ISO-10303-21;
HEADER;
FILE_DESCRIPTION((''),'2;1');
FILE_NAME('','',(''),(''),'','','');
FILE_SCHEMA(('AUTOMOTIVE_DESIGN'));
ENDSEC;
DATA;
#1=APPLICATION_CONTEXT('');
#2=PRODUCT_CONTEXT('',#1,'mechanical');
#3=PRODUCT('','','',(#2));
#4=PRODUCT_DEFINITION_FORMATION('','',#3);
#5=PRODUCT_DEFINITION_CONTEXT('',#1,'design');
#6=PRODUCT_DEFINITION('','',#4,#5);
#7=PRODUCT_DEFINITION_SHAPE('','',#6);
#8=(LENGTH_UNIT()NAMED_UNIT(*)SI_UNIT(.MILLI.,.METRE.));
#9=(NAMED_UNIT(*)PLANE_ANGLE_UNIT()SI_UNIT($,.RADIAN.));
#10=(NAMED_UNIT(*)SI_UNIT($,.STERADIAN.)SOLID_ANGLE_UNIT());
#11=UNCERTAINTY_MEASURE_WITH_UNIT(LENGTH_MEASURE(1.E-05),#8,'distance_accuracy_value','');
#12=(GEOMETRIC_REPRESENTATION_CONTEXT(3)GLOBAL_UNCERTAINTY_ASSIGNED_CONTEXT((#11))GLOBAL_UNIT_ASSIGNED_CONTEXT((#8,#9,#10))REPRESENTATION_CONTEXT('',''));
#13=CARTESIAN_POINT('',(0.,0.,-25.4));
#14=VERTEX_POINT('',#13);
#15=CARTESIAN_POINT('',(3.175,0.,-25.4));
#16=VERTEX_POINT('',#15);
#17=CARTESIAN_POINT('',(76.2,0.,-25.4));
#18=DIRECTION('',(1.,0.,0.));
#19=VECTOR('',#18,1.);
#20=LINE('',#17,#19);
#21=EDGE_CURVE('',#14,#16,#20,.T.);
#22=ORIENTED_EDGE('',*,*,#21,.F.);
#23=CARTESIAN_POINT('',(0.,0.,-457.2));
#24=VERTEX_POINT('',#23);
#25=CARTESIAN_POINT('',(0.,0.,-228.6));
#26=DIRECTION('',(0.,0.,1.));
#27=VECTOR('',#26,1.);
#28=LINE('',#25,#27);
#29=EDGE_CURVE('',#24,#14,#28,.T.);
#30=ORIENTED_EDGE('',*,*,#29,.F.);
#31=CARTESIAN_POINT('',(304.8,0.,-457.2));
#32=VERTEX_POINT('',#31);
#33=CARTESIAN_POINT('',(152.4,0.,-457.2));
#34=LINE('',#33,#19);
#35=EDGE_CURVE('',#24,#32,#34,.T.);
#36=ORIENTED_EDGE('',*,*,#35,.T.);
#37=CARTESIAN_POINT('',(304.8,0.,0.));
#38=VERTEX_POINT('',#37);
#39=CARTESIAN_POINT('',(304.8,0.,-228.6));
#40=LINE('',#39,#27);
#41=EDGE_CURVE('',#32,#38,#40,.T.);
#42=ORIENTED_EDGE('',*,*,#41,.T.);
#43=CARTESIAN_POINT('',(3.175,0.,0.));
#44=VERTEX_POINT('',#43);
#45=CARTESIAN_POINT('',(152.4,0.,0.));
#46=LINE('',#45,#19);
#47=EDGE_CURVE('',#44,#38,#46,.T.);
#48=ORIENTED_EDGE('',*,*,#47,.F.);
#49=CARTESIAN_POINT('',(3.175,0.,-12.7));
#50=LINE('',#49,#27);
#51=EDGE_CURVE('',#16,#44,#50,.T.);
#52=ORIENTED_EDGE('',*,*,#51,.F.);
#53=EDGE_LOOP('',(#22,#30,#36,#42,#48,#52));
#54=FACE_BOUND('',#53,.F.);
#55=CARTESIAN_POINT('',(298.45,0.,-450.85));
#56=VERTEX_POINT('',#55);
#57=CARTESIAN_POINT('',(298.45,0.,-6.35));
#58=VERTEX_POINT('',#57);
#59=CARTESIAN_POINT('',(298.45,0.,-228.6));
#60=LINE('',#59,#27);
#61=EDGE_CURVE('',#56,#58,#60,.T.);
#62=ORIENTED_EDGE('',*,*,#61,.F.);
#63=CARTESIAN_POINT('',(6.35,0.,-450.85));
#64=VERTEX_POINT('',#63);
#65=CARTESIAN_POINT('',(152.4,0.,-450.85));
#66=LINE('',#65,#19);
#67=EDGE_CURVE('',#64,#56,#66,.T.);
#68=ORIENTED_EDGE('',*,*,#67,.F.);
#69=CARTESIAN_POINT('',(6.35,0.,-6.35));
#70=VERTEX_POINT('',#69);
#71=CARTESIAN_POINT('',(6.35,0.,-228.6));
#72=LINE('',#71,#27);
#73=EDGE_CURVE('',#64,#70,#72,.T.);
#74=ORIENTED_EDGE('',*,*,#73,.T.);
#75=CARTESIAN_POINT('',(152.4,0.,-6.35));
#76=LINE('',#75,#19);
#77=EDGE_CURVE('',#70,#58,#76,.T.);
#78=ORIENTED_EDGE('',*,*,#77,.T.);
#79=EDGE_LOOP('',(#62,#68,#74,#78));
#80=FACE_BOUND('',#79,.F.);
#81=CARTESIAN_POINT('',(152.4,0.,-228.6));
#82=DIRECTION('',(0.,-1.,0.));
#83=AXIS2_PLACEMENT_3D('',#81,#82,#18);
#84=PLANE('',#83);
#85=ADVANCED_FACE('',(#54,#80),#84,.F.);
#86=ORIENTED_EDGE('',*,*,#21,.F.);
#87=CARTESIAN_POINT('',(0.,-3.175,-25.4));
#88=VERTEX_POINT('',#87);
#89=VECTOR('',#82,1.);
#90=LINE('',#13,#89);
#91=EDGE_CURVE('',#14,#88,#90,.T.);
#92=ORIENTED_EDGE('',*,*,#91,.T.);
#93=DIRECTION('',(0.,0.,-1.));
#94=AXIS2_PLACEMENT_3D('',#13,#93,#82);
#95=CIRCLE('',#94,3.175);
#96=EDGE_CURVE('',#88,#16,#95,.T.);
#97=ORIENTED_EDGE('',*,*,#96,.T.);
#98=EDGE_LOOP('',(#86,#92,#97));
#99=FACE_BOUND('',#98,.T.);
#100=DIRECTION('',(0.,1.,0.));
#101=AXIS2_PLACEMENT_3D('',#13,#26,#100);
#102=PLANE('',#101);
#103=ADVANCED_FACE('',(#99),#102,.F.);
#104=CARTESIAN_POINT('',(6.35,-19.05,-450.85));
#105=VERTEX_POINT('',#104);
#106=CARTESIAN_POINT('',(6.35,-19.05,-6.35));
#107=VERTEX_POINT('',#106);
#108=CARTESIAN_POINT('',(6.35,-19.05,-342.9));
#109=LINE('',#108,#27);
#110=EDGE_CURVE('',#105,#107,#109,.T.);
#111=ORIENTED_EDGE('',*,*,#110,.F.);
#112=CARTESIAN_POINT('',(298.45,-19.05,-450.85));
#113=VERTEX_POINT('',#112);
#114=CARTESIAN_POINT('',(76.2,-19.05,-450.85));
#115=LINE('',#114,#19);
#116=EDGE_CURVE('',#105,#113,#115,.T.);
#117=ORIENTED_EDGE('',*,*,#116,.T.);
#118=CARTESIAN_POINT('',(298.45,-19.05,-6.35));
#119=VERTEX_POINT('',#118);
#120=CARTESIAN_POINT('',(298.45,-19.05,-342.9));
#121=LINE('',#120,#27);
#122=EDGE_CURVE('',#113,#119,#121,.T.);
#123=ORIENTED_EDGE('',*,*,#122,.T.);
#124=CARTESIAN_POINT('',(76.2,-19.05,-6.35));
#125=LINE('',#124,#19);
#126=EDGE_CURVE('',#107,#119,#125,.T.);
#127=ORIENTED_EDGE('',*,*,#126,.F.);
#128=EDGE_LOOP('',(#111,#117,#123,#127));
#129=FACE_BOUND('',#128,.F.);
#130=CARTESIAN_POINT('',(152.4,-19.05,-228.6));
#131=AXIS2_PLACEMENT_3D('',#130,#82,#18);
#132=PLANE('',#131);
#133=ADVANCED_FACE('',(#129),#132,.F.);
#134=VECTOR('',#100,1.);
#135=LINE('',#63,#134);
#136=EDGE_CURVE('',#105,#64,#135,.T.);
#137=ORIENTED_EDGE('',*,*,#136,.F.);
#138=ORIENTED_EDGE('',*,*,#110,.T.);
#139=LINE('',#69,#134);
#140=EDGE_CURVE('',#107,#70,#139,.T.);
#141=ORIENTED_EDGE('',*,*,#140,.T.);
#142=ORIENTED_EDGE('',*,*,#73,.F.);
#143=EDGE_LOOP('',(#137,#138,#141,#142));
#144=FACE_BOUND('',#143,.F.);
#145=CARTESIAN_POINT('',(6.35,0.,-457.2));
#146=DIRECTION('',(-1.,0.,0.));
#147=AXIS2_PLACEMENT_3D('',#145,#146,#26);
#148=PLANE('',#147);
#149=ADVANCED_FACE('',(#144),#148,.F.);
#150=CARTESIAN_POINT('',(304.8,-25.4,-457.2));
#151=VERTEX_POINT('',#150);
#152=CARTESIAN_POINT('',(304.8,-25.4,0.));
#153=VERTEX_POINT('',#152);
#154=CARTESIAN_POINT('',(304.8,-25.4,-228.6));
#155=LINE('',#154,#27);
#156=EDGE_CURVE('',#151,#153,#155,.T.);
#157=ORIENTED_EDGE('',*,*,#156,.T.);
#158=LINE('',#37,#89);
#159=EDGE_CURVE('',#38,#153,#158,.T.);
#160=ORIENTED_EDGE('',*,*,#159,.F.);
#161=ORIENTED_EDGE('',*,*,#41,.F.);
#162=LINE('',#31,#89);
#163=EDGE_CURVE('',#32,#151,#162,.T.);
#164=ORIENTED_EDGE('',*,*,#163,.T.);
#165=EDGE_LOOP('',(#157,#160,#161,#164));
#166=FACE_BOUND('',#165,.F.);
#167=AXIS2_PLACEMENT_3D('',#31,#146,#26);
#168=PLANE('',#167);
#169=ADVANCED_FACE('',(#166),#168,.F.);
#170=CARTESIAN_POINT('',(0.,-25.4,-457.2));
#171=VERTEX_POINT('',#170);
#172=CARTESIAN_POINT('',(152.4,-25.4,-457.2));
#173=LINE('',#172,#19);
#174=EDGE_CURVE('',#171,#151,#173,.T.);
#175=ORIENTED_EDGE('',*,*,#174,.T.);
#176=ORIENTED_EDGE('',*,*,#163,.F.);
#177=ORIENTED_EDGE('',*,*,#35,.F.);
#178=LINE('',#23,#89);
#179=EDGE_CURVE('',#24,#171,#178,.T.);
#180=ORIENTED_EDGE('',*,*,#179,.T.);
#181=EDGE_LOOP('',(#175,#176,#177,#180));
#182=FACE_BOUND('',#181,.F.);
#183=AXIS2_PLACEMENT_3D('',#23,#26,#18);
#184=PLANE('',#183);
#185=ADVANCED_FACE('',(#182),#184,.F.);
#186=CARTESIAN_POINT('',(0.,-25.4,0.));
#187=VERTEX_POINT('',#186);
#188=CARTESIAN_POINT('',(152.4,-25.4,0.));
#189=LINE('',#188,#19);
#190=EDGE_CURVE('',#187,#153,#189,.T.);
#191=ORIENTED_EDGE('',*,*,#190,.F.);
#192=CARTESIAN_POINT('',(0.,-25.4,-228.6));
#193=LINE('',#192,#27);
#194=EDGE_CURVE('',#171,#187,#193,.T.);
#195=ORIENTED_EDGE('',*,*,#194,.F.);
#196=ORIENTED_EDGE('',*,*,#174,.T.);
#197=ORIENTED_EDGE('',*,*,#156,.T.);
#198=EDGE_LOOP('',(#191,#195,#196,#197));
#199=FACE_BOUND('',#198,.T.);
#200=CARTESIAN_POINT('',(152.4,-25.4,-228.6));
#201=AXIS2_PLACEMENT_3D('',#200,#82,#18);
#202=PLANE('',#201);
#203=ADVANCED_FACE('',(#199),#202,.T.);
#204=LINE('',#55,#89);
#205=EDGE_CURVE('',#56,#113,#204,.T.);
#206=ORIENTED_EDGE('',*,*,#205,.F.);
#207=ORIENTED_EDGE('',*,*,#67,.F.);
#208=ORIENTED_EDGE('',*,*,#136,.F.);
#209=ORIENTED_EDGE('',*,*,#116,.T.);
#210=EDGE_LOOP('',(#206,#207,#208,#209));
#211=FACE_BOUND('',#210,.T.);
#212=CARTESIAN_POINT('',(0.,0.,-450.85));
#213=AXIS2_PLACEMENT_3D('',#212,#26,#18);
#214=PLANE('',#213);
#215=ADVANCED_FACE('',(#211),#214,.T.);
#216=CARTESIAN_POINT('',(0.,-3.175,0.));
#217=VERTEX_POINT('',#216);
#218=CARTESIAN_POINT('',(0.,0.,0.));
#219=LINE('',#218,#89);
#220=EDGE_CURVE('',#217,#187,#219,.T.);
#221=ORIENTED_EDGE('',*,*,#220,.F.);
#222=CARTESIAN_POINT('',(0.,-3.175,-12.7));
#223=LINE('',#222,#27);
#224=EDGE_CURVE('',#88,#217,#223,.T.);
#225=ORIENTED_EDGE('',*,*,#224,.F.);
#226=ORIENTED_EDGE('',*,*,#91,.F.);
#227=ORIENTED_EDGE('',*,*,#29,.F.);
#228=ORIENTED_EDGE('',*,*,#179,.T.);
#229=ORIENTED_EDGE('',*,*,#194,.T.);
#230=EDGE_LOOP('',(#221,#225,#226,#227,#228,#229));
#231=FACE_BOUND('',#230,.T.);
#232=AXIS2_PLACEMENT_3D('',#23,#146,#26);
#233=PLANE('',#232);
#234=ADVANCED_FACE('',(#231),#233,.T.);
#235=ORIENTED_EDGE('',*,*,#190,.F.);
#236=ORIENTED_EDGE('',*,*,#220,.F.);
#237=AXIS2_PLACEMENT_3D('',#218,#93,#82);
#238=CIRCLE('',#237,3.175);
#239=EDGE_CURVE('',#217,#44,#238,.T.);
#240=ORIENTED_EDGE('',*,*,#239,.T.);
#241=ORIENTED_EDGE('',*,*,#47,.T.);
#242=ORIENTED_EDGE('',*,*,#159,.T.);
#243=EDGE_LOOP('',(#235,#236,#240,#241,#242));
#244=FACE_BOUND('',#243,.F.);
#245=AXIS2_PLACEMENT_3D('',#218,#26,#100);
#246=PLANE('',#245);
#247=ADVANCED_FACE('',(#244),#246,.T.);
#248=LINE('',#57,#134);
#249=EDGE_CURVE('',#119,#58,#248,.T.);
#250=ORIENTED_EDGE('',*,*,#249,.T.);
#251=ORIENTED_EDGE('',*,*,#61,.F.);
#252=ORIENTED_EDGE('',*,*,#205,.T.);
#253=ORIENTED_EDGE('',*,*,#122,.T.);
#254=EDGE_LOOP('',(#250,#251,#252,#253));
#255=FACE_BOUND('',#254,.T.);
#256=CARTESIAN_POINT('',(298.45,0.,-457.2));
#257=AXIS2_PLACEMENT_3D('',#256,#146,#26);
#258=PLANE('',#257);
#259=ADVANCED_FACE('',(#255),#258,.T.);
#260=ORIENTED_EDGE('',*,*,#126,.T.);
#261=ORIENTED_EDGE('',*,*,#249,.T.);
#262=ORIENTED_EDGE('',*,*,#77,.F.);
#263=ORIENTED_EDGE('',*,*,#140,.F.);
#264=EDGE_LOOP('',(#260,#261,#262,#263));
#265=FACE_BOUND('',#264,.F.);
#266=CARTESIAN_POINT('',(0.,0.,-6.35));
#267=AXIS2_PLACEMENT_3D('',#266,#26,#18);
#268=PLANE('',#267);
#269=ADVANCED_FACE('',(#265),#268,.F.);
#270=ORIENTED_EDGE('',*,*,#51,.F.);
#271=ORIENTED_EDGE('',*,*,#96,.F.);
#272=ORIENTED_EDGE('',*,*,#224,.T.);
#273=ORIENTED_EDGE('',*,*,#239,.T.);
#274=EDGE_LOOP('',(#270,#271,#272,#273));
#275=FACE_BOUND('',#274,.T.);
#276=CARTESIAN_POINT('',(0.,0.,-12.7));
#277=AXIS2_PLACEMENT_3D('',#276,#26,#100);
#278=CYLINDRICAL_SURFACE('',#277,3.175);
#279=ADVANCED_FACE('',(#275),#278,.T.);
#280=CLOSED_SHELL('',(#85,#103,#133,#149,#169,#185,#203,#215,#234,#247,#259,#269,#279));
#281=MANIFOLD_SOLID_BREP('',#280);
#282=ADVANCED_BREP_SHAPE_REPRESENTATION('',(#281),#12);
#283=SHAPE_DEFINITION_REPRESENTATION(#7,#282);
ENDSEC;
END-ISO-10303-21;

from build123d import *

# Parameters (mm, degrees)
F0_W     = 304.8
F0_H     = 457.2
F2_DEPTH = 25.4
F3_T     = -6.35
F4_W     = 3.175
F4_H     = 25.4


# Not quite as in the source:
# - the program builds the solid bodies; features that only make, move or delete a surface that nothing else refers to are left out


with BuildPart() as f2:
    # F0 (on Front) → F2 (new body)
    with BuildSketch(Plane.XZ):
        with Locations((152.4, -228.6)):
            Rectangle(F0_W, F0_H)
    extrude(amount=F2_DEPTH)

    # F3
    f3_openings = [f2.faces().sort_by_distance(p)[0] for p in [
        (152.4, 0, -228.6),
    ]]
    offset(amount=F3_T, openings=f3_openings)

    # F4 (on Right) → F5 (revolve)
    with BuildSketch(Plane.YZ):
        with Locations((1.5875, -12.7)):
            Rectangle(F4_W, F4_H)
    revolve(axis=Axis((0, 0, 39.7453531623), (0, 0, 1)))


solid = f2.part
